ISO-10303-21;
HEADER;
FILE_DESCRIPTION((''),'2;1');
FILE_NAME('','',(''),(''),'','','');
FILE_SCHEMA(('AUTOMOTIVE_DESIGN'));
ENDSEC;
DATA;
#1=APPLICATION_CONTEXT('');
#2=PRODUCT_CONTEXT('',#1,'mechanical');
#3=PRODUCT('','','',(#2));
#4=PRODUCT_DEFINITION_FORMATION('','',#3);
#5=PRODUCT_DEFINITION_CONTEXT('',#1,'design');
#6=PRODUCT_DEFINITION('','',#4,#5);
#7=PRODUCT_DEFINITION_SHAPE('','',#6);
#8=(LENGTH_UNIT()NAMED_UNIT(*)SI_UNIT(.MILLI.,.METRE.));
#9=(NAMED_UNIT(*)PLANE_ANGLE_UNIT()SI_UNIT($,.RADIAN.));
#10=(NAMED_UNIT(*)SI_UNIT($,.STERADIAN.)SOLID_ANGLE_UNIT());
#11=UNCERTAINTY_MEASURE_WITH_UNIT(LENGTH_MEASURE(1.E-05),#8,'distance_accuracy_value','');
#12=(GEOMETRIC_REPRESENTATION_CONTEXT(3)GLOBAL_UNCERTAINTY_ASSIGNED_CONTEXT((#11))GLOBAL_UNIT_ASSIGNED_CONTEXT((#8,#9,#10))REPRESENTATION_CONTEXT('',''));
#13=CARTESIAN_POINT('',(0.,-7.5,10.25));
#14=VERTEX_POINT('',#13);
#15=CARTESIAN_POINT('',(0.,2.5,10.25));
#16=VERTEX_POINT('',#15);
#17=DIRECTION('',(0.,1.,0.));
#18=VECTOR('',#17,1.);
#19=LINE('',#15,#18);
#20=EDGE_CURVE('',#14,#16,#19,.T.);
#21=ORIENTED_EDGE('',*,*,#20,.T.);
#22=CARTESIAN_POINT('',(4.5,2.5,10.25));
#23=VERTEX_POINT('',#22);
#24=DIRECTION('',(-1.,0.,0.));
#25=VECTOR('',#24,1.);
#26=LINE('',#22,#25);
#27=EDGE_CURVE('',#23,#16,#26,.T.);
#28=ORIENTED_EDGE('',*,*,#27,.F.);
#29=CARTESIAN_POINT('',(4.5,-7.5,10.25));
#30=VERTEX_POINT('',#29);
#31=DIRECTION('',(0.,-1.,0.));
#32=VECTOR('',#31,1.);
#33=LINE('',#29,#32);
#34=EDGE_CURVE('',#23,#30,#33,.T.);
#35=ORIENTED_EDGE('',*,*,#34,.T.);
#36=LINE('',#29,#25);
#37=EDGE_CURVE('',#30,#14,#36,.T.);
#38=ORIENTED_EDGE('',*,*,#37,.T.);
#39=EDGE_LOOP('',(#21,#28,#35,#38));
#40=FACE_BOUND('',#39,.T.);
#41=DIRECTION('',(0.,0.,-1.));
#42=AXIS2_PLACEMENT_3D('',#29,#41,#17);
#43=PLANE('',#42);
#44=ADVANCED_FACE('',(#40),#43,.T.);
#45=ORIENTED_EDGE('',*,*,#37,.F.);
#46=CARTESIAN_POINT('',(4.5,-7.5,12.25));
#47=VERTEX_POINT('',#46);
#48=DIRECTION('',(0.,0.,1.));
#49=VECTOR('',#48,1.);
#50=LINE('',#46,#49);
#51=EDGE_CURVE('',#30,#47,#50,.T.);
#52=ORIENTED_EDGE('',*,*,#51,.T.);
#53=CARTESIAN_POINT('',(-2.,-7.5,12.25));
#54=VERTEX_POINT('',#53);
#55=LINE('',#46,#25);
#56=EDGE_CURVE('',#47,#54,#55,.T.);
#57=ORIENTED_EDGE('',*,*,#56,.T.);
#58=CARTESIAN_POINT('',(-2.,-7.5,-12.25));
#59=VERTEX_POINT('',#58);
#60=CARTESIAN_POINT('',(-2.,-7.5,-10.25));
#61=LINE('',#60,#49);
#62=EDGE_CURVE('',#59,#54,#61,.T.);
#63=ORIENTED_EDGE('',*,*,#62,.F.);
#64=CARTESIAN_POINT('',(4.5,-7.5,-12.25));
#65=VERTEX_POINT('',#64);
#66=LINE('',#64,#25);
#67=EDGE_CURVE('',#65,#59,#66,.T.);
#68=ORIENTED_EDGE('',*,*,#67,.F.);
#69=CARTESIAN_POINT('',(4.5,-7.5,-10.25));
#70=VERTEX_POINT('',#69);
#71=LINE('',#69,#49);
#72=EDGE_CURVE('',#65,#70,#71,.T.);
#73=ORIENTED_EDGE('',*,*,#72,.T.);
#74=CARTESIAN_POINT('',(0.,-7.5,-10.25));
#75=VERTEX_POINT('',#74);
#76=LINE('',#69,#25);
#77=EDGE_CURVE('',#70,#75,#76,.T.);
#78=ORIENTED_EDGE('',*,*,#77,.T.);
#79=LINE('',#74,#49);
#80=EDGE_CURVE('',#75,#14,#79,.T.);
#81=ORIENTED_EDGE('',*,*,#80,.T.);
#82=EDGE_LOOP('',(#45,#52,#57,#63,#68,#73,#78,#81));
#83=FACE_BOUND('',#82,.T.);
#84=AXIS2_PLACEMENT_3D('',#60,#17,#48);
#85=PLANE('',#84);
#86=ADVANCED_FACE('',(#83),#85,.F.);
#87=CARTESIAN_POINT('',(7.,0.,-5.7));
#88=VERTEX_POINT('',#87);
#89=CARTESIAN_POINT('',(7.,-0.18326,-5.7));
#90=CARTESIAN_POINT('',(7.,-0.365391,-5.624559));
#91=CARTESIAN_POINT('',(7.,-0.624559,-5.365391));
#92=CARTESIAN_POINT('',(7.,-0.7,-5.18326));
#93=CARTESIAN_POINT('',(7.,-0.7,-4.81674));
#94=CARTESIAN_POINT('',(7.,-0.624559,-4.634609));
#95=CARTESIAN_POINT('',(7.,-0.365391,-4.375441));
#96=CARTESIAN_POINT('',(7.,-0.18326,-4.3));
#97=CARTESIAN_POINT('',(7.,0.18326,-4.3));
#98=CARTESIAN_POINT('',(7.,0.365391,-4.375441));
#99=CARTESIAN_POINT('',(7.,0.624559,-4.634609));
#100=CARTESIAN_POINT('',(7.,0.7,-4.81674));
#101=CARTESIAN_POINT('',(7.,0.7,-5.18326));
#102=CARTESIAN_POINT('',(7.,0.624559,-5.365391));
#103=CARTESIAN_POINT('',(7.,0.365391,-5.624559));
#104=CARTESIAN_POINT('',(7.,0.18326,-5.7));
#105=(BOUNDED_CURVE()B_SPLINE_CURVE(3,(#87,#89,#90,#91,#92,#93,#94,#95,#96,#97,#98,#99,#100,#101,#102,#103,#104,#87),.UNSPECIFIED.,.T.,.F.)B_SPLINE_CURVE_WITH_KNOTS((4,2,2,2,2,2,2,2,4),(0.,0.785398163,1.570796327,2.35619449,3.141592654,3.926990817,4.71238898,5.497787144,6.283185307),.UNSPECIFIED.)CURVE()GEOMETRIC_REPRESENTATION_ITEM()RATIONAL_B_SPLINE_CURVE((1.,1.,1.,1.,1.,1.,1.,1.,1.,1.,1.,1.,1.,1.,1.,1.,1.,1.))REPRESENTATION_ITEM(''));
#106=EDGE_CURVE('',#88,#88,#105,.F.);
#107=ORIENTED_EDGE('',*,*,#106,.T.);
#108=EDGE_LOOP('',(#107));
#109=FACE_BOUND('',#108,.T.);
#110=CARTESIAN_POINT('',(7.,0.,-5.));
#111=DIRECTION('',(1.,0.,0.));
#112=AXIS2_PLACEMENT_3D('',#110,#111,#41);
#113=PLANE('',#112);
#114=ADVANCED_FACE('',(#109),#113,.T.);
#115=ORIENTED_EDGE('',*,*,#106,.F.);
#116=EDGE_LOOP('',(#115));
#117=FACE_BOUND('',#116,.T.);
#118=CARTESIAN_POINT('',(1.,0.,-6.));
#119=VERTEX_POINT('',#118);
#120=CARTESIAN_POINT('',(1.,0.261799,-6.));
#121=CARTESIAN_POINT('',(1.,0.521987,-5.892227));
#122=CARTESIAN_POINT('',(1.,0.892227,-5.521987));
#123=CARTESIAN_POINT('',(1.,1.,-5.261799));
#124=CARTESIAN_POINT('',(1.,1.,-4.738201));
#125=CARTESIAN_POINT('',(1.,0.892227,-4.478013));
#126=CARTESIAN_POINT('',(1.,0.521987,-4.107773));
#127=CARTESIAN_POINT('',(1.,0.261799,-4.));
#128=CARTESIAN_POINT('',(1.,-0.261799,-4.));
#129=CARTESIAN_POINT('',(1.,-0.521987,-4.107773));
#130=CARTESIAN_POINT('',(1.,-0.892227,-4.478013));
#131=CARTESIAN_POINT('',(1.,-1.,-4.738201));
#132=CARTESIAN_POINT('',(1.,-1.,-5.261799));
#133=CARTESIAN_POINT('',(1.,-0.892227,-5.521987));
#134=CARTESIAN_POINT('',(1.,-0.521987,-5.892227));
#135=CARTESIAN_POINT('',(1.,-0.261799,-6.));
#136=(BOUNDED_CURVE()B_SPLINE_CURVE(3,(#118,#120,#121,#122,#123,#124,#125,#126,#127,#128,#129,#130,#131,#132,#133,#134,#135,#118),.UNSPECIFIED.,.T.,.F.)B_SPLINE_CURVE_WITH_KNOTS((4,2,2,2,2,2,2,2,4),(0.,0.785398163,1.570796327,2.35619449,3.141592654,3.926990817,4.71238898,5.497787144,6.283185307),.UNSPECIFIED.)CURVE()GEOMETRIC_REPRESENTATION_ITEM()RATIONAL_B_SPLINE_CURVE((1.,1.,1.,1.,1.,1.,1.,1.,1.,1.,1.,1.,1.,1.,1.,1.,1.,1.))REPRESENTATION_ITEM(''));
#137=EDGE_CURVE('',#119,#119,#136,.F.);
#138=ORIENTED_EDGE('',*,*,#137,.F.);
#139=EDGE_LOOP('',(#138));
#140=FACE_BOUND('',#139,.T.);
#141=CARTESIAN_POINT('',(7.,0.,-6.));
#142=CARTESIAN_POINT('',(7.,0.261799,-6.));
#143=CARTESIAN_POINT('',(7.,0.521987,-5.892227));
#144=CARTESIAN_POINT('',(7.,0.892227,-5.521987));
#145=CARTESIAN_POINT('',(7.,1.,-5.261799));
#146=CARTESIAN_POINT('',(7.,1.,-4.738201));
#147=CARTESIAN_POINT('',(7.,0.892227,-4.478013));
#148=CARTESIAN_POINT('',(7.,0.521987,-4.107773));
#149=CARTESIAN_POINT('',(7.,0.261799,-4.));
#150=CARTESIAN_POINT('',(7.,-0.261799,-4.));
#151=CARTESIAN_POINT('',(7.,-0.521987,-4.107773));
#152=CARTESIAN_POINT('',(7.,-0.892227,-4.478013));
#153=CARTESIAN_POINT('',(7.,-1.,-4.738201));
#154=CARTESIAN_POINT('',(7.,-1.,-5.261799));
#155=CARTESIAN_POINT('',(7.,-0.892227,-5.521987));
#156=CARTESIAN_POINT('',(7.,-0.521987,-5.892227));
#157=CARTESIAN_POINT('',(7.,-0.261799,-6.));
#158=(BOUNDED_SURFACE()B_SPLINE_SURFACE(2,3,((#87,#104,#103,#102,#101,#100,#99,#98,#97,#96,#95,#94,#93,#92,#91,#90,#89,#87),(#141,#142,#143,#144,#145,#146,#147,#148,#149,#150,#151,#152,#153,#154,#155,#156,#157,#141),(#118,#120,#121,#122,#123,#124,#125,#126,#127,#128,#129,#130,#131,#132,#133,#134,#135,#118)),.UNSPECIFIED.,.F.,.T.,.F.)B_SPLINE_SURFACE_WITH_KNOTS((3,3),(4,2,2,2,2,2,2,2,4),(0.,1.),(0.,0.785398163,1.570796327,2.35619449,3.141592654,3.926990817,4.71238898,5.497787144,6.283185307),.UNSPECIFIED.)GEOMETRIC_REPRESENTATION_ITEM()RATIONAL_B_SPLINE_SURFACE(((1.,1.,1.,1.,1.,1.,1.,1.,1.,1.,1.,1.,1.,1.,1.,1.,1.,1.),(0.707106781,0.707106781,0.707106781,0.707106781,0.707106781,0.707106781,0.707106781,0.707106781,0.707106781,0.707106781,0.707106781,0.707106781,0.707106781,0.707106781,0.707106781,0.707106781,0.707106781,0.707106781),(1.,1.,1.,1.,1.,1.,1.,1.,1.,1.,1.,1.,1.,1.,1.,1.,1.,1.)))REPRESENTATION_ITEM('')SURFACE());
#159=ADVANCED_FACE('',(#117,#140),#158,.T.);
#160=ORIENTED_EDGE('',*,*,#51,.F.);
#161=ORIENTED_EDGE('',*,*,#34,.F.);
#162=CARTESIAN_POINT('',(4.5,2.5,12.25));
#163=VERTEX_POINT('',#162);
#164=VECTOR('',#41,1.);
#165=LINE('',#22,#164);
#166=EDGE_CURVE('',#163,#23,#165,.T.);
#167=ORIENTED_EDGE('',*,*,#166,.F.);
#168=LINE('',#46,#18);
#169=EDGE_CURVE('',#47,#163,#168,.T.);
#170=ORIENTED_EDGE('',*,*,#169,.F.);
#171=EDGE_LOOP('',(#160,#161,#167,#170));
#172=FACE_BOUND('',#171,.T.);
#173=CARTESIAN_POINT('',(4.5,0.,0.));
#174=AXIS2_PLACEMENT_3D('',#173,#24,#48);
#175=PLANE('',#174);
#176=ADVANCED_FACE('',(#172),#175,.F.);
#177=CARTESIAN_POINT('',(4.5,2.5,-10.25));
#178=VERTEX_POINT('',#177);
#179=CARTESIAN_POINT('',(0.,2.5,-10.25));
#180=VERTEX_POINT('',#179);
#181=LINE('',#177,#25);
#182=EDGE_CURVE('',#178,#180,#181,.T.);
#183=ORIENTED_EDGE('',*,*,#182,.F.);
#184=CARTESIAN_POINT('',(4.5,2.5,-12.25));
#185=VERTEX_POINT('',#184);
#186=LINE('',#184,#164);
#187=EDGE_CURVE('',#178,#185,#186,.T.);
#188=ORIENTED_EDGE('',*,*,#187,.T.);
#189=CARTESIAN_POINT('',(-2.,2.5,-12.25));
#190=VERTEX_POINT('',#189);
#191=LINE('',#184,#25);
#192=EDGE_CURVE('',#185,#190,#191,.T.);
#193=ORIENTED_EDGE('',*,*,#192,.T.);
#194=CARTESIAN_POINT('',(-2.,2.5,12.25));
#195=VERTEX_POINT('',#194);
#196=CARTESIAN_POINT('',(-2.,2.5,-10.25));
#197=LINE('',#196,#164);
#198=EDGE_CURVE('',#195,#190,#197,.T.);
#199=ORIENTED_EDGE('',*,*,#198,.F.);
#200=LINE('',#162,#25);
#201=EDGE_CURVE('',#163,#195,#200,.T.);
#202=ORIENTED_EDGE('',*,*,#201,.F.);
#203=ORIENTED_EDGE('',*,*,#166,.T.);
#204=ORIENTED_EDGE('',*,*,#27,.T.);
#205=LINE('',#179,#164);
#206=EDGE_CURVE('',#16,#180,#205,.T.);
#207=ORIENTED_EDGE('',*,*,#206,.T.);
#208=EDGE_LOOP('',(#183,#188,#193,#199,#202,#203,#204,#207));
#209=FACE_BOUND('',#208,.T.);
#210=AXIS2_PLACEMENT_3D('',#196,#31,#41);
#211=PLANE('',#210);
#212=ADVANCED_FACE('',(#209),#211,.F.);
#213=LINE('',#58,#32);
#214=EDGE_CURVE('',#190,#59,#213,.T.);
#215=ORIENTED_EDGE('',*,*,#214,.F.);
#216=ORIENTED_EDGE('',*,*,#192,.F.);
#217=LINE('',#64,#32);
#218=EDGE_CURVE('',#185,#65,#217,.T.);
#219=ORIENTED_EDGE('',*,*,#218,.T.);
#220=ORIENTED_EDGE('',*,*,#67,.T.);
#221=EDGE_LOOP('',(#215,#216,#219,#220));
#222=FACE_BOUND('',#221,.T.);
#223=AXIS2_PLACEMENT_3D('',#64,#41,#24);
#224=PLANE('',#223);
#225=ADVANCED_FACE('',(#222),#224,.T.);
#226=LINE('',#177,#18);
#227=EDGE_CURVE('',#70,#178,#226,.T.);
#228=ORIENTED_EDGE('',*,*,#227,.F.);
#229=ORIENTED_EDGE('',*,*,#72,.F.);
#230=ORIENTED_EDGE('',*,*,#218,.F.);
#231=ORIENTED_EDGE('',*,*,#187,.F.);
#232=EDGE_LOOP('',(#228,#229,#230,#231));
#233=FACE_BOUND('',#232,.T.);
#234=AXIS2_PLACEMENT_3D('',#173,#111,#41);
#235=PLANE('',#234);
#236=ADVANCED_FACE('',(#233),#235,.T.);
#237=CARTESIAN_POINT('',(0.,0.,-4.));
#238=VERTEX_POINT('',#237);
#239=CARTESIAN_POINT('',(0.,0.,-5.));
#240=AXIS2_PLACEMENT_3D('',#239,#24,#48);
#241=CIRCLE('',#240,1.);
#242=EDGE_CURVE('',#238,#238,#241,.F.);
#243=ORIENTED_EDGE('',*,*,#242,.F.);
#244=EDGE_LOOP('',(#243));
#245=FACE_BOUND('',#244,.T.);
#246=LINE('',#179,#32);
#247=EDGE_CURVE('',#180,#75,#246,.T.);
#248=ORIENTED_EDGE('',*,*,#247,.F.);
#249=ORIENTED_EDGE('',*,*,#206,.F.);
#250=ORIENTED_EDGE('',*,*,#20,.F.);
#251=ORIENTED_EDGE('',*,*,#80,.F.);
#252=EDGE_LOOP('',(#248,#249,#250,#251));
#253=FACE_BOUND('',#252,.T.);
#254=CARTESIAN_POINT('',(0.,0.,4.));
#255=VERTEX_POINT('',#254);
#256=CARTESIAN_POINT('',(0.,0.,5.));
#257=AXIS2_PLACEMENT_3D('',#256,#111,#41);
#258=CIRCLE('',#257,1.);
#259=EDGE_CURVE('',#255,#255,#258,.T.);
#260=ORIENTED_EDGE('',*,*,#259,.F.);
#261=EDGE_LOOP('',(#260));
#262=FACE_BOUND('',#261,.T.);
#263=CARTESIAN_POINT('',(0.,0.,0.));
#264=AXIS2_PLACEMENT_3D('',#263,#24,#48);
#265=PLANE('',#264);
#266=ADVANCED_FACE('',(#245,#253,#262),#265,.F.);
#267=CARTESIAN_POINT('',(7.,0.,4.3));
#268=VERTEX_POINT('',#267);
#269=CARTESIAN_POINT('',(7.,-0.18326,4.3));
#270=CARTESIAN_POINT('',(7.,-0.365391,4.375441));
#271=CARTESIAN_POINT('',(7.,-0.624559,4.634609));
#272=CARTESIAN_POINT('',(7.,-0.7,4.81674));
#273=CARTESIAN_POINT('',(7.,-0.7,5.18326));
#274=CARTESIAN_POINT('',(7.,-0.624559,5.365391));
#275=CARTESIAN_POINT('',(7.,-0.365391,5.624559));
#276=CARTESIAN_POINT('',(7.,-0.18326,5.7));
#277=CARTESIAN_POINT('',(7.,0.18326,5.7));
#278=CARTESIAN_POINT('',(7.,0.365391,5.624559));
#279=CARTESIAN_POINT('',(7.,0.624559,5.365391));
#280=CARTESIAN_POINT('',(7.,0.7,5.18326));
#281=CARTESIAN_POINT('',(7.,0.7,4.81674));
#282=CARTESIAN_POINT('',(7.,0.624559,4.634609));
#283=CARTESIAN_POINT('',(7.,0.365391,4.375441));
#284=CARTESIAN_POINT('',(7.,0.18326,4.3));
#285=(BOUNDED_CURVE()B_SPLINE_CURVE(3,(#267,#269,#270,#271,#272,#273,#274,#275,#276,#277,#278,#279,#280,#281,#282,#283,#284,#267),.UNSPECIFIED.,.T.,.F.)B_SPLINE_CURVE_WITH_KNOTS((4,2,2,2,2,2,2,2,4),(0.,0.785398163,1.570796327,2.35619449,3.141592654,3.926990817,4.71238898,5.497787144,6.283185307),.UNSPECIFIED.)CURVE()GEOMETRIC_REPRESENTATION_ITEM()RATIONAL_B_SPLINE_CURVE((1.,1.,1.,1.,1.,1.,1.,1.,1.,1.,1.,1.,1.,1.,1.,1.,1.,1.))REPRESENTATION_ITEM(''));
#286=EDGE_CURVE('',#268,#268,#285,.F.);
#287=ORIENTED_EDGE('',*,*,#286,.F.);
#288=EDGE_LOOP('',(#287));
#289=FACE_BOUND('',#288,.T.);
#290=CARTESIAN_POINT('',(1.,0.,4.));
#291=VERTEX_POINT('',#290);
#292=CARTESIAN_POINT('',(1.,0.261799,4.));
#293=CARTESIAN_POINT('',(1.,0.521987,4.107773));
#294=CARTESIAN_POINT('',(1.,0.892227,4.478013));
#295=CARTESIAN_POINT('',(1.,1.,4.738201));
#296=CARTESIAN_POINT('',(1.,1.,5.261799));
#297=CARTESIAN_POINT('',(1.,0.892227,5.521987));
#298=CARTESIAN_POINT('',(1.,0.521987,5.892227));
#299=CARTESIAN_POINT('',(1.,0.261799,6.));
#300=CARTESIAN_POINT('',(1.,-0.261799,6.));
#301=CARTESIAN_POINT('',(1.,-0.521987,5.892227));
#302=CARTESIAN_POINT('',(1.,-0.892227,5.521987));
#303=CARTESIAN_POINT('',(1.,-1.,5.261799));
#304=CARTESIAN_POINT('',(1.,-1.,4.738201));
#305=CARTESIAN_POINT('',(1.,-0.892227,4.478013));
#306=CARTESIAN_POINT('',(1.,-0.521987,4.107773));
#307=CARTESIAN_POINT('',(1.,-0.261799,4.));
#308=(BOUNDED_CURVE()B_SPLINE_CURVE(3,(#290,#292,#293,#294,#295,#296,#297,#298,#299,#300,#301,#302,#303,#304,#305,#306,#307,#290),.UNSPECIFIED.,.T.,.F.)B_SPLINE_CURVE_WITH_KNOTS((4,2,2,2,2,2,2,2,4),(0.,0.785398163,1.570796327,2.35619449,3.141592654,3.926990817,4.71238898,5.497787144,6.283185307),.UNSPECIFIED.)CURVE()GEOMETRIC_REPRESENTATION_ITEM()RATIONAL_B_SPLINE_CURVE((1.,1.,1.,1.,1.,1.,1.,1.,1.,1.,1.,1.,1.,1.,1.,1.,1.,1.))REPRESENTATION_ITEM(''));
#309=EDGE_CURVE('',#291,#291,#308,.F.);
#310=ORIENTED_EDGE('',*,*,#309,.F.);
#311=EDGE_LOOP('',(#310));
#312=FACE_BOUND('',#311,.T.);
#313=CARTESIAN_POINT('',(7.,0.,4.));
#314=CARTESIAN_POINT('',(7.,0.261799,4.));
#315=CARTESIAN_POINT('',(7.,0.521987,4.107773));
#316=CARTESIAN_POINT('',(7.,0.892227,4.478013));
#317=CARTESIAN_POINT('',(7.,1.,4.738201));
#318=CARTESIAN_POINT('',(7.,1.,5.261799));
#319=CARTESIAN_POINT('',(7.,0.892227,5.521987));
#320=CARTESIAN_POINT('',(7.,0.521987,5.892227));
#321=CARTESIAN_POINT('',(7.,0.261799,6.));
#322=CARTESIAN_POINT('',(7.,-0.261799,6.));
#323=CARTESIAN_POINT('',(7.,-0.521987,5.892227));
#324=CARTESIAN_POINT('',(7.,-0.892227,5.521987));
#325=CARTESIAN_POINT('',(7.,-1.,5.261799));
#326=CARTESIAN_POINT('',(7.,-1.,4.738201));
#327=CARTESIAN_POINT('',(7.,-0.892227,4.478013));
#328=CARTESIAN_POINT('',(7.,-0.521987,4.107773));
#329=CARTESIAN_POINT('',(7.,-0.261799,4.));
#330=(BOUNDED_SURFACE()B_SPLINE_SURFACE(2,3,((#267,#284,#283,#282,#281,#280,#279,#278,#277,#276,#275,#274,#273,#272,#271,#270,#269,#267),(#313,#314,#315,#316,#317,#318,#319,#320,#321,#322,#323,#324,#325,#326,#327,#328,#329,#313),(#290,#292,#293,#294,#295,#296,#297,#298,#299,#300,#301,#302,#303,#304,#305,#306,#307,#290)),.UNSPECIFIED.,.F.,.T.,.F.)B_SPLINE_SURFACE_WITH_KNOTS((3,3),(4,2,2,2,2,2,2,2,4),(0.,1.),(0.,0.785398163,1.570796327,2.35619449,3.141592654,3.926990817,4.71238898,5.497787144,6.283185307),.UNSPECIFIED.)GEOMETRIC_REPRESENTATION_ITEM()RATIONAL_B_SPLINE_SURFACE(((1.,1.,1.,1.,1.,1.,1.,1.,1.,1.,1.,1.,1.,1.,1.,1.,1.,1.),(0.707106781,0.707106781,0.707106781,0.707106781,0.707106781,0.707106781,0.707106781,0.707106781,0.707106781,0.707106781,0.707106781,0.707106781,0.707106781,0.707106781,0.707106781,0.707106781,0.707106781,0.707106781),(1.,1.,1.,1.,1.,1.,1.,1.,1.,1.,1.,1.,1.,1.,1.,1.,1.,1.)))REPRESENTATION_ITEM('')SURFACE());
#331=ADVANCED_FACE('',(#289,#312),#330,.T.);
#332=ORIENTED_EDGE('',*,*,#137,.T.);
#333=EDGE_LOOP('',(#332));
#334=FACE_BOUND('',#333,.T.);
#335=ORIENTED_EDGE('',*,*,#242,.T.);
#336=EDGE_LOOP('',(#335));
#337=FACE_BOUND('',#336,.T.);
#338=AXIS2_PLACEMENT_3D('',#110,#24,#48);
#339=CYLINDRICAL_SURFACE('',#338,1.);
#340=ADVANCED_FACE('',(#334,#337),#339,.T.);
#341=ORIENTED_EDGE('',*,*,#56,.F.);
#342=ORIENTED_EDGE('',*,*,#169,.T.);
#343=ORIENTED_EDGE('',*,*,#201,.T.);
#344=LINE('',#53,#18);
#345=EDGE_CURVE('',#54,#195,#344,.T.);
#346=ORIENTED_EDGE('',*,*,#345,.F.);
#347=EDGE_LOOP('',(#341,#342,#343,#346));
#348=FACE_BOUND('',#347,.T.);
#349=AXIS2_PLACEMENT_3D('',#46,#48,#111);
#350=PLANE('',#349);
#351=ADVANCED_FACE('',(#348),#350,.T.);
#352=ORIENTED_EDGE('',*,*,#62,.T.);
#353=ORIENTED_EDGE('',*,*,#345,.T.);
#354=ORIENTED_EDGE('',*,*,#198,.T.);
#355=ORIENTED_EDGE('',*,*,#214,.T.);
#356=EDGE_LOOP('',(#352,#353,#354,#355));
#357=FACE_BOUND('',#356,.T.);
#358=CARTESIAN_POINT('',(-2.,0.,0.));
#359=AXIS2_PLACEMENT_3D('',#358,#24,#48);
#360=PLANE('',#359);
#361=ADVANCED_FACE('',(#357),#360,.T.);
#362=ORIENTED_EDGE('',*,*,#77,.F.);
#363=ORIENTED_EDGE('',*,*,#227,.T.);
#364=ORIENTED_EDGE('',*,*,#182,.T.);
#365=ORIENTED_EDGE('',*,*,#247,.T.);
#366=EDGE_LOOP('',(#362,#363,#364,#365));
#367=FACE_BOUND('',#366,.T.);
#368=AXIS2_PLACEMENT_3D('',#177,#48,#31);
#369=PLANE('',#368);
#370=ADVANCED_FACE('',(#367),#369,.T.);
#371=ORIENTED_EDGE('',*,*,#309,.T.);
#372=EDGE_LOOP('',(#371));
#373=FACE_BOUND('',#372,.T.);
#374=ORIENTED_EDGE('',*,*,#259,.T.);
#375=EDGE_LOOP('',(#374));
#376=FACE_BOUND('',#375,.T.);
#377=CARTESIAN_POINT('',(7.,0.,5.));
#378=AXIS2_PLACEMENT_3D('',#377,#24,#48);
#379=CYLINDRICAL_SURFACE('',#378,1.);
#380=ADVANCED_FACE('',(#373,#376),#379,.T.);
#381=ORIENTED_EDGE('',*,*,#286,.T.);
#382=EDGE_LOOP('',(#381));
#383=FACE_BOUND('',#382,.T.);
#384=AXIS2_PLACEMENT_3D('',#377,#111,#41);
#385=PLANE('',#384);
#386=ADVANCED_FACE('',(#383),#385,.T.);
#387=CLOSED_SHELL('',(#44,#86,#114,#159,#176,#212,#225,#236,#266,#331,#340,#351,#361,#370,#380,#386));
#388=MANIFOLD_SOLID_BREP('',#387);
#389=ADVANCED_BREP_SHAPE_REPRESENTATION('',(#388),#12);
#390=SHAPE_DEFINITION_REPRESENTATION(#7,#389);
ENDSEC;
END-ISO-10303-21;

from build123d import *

# Parameters (mm, degrees)
SKETCH1_R             = 1
BOSS_EXTRUDE1_DEPTH   = 7
BOSS_EXTRUDE1_2_DEPTH = 7
SKETCH2_W             = 20.5
SKETCH2_H             = 10
BOSS_EXTRUDE2_DEPTH   = 2
SKETCH4_W             = 2
SKETCH4_H             = 10
BOSS_EXTRUDE3_DEPTH   = 6.5
FILLET1_SIZE          = 6
FILLET1_SIZE_2        = 0.3


with BuildPart() as part:
    # Sketch1 → Boss-Extrude1 (new body)
    with BuildSketch(Plane(origin=(0, 0, 0), x_dir=(0, 0, -1), z_dir=(1, 0, 0))):
        with Locations((-5, 0)):
            Circle(SKETCH1_R)
    extrude(amount=BOSS_EXTRUDE1_DEPTH)



with BuildPart() as body_2:
    # Sketch1 → Boss-Extrude1 2 (new body)
    with BuildSketch(Plane(origin=(0, 0, 0), x_dir=(0, 0, -1), z_dir=(1, 0, 0))):
        with Locations((5, 0)):
            Circle(SKETCH1_R)
    extrude(amount=BOSS_EXTRUDE1_2_DEPTH)


with BuildPart() as part_1:
    add(part.part)

    add(body_2.part)  # Boss-Extrude2 merges body 2
    # Sketch2 → Boss-Extrude2 (add)
    with BuildSketch(Plane.ZY):
        with Locations((0, -2.5)):
            Rectangle(SKETCH2_W, SKETCH2_H)
    extrude(amount=BOSS_EXTRUDE2_DEPTH)

    # Sketch4 → Boss-Extrude3 (add)
    with BuildSketch(Plane.ZY.offset(2)):
        with Locations((-11.25, -2.5)):
            Rectangle(SKETCH4_W, SKETCH4_H)
        with Locations((11.25, -2.5)):
            Rectangle(SKETCH4_W, SKETCH4_H)
    extrude(amount=-BOSS_EXTRUDE3_DEPTH)

    # Fillet1
    # an asymmetric fillet: 6, 0.3 mm, written as the material it takes off along each edge
    with BuildSketch(Plane(origin=(7, 0, -5), x_dir=(0, 0, -1), z_dir=(0, -1, 0))) as fillet1_piece_1:
        with BuildLine():
            Bezier((1, -FILLET1_SIZE), (1, 0), (1 - FILLET1_SIZE_2, 0), weights=[1, 0.707106781, 1])
            Line((1 - FILLET1_SIZE_2, 0), (1, 0))
            Line((1, 0), (1, -FILLET1_SIZE))
        make_face()
    revolve(axis=Axis((7, 0, -5), (1, 0, 0)), mode=Mode.SUBTRACT)
    with BuildSketch(Plane(origin=(7, 0, 5), x_dir=(0, 0, -1), z_dir=(0, -1, 0))) as fillet1_piece_2:
        with BuildLine():
            Bezier((1, -FILLET1_SIZE), (1, 0), (1 - FILLET1_SIZE_2, 0), weights=[1, 0.707106781, 1])
            Line((1 - FILLET1_SIZE_2, 0), (1, 0))
            Line((1, 0), (1, -FILLET1_SIZE))
        make_face()
    revolve(axis=Axis((7, 0, 5), (1, 0, 0)), mode=Mode.SUBTRACT)


solid = part_1.part
